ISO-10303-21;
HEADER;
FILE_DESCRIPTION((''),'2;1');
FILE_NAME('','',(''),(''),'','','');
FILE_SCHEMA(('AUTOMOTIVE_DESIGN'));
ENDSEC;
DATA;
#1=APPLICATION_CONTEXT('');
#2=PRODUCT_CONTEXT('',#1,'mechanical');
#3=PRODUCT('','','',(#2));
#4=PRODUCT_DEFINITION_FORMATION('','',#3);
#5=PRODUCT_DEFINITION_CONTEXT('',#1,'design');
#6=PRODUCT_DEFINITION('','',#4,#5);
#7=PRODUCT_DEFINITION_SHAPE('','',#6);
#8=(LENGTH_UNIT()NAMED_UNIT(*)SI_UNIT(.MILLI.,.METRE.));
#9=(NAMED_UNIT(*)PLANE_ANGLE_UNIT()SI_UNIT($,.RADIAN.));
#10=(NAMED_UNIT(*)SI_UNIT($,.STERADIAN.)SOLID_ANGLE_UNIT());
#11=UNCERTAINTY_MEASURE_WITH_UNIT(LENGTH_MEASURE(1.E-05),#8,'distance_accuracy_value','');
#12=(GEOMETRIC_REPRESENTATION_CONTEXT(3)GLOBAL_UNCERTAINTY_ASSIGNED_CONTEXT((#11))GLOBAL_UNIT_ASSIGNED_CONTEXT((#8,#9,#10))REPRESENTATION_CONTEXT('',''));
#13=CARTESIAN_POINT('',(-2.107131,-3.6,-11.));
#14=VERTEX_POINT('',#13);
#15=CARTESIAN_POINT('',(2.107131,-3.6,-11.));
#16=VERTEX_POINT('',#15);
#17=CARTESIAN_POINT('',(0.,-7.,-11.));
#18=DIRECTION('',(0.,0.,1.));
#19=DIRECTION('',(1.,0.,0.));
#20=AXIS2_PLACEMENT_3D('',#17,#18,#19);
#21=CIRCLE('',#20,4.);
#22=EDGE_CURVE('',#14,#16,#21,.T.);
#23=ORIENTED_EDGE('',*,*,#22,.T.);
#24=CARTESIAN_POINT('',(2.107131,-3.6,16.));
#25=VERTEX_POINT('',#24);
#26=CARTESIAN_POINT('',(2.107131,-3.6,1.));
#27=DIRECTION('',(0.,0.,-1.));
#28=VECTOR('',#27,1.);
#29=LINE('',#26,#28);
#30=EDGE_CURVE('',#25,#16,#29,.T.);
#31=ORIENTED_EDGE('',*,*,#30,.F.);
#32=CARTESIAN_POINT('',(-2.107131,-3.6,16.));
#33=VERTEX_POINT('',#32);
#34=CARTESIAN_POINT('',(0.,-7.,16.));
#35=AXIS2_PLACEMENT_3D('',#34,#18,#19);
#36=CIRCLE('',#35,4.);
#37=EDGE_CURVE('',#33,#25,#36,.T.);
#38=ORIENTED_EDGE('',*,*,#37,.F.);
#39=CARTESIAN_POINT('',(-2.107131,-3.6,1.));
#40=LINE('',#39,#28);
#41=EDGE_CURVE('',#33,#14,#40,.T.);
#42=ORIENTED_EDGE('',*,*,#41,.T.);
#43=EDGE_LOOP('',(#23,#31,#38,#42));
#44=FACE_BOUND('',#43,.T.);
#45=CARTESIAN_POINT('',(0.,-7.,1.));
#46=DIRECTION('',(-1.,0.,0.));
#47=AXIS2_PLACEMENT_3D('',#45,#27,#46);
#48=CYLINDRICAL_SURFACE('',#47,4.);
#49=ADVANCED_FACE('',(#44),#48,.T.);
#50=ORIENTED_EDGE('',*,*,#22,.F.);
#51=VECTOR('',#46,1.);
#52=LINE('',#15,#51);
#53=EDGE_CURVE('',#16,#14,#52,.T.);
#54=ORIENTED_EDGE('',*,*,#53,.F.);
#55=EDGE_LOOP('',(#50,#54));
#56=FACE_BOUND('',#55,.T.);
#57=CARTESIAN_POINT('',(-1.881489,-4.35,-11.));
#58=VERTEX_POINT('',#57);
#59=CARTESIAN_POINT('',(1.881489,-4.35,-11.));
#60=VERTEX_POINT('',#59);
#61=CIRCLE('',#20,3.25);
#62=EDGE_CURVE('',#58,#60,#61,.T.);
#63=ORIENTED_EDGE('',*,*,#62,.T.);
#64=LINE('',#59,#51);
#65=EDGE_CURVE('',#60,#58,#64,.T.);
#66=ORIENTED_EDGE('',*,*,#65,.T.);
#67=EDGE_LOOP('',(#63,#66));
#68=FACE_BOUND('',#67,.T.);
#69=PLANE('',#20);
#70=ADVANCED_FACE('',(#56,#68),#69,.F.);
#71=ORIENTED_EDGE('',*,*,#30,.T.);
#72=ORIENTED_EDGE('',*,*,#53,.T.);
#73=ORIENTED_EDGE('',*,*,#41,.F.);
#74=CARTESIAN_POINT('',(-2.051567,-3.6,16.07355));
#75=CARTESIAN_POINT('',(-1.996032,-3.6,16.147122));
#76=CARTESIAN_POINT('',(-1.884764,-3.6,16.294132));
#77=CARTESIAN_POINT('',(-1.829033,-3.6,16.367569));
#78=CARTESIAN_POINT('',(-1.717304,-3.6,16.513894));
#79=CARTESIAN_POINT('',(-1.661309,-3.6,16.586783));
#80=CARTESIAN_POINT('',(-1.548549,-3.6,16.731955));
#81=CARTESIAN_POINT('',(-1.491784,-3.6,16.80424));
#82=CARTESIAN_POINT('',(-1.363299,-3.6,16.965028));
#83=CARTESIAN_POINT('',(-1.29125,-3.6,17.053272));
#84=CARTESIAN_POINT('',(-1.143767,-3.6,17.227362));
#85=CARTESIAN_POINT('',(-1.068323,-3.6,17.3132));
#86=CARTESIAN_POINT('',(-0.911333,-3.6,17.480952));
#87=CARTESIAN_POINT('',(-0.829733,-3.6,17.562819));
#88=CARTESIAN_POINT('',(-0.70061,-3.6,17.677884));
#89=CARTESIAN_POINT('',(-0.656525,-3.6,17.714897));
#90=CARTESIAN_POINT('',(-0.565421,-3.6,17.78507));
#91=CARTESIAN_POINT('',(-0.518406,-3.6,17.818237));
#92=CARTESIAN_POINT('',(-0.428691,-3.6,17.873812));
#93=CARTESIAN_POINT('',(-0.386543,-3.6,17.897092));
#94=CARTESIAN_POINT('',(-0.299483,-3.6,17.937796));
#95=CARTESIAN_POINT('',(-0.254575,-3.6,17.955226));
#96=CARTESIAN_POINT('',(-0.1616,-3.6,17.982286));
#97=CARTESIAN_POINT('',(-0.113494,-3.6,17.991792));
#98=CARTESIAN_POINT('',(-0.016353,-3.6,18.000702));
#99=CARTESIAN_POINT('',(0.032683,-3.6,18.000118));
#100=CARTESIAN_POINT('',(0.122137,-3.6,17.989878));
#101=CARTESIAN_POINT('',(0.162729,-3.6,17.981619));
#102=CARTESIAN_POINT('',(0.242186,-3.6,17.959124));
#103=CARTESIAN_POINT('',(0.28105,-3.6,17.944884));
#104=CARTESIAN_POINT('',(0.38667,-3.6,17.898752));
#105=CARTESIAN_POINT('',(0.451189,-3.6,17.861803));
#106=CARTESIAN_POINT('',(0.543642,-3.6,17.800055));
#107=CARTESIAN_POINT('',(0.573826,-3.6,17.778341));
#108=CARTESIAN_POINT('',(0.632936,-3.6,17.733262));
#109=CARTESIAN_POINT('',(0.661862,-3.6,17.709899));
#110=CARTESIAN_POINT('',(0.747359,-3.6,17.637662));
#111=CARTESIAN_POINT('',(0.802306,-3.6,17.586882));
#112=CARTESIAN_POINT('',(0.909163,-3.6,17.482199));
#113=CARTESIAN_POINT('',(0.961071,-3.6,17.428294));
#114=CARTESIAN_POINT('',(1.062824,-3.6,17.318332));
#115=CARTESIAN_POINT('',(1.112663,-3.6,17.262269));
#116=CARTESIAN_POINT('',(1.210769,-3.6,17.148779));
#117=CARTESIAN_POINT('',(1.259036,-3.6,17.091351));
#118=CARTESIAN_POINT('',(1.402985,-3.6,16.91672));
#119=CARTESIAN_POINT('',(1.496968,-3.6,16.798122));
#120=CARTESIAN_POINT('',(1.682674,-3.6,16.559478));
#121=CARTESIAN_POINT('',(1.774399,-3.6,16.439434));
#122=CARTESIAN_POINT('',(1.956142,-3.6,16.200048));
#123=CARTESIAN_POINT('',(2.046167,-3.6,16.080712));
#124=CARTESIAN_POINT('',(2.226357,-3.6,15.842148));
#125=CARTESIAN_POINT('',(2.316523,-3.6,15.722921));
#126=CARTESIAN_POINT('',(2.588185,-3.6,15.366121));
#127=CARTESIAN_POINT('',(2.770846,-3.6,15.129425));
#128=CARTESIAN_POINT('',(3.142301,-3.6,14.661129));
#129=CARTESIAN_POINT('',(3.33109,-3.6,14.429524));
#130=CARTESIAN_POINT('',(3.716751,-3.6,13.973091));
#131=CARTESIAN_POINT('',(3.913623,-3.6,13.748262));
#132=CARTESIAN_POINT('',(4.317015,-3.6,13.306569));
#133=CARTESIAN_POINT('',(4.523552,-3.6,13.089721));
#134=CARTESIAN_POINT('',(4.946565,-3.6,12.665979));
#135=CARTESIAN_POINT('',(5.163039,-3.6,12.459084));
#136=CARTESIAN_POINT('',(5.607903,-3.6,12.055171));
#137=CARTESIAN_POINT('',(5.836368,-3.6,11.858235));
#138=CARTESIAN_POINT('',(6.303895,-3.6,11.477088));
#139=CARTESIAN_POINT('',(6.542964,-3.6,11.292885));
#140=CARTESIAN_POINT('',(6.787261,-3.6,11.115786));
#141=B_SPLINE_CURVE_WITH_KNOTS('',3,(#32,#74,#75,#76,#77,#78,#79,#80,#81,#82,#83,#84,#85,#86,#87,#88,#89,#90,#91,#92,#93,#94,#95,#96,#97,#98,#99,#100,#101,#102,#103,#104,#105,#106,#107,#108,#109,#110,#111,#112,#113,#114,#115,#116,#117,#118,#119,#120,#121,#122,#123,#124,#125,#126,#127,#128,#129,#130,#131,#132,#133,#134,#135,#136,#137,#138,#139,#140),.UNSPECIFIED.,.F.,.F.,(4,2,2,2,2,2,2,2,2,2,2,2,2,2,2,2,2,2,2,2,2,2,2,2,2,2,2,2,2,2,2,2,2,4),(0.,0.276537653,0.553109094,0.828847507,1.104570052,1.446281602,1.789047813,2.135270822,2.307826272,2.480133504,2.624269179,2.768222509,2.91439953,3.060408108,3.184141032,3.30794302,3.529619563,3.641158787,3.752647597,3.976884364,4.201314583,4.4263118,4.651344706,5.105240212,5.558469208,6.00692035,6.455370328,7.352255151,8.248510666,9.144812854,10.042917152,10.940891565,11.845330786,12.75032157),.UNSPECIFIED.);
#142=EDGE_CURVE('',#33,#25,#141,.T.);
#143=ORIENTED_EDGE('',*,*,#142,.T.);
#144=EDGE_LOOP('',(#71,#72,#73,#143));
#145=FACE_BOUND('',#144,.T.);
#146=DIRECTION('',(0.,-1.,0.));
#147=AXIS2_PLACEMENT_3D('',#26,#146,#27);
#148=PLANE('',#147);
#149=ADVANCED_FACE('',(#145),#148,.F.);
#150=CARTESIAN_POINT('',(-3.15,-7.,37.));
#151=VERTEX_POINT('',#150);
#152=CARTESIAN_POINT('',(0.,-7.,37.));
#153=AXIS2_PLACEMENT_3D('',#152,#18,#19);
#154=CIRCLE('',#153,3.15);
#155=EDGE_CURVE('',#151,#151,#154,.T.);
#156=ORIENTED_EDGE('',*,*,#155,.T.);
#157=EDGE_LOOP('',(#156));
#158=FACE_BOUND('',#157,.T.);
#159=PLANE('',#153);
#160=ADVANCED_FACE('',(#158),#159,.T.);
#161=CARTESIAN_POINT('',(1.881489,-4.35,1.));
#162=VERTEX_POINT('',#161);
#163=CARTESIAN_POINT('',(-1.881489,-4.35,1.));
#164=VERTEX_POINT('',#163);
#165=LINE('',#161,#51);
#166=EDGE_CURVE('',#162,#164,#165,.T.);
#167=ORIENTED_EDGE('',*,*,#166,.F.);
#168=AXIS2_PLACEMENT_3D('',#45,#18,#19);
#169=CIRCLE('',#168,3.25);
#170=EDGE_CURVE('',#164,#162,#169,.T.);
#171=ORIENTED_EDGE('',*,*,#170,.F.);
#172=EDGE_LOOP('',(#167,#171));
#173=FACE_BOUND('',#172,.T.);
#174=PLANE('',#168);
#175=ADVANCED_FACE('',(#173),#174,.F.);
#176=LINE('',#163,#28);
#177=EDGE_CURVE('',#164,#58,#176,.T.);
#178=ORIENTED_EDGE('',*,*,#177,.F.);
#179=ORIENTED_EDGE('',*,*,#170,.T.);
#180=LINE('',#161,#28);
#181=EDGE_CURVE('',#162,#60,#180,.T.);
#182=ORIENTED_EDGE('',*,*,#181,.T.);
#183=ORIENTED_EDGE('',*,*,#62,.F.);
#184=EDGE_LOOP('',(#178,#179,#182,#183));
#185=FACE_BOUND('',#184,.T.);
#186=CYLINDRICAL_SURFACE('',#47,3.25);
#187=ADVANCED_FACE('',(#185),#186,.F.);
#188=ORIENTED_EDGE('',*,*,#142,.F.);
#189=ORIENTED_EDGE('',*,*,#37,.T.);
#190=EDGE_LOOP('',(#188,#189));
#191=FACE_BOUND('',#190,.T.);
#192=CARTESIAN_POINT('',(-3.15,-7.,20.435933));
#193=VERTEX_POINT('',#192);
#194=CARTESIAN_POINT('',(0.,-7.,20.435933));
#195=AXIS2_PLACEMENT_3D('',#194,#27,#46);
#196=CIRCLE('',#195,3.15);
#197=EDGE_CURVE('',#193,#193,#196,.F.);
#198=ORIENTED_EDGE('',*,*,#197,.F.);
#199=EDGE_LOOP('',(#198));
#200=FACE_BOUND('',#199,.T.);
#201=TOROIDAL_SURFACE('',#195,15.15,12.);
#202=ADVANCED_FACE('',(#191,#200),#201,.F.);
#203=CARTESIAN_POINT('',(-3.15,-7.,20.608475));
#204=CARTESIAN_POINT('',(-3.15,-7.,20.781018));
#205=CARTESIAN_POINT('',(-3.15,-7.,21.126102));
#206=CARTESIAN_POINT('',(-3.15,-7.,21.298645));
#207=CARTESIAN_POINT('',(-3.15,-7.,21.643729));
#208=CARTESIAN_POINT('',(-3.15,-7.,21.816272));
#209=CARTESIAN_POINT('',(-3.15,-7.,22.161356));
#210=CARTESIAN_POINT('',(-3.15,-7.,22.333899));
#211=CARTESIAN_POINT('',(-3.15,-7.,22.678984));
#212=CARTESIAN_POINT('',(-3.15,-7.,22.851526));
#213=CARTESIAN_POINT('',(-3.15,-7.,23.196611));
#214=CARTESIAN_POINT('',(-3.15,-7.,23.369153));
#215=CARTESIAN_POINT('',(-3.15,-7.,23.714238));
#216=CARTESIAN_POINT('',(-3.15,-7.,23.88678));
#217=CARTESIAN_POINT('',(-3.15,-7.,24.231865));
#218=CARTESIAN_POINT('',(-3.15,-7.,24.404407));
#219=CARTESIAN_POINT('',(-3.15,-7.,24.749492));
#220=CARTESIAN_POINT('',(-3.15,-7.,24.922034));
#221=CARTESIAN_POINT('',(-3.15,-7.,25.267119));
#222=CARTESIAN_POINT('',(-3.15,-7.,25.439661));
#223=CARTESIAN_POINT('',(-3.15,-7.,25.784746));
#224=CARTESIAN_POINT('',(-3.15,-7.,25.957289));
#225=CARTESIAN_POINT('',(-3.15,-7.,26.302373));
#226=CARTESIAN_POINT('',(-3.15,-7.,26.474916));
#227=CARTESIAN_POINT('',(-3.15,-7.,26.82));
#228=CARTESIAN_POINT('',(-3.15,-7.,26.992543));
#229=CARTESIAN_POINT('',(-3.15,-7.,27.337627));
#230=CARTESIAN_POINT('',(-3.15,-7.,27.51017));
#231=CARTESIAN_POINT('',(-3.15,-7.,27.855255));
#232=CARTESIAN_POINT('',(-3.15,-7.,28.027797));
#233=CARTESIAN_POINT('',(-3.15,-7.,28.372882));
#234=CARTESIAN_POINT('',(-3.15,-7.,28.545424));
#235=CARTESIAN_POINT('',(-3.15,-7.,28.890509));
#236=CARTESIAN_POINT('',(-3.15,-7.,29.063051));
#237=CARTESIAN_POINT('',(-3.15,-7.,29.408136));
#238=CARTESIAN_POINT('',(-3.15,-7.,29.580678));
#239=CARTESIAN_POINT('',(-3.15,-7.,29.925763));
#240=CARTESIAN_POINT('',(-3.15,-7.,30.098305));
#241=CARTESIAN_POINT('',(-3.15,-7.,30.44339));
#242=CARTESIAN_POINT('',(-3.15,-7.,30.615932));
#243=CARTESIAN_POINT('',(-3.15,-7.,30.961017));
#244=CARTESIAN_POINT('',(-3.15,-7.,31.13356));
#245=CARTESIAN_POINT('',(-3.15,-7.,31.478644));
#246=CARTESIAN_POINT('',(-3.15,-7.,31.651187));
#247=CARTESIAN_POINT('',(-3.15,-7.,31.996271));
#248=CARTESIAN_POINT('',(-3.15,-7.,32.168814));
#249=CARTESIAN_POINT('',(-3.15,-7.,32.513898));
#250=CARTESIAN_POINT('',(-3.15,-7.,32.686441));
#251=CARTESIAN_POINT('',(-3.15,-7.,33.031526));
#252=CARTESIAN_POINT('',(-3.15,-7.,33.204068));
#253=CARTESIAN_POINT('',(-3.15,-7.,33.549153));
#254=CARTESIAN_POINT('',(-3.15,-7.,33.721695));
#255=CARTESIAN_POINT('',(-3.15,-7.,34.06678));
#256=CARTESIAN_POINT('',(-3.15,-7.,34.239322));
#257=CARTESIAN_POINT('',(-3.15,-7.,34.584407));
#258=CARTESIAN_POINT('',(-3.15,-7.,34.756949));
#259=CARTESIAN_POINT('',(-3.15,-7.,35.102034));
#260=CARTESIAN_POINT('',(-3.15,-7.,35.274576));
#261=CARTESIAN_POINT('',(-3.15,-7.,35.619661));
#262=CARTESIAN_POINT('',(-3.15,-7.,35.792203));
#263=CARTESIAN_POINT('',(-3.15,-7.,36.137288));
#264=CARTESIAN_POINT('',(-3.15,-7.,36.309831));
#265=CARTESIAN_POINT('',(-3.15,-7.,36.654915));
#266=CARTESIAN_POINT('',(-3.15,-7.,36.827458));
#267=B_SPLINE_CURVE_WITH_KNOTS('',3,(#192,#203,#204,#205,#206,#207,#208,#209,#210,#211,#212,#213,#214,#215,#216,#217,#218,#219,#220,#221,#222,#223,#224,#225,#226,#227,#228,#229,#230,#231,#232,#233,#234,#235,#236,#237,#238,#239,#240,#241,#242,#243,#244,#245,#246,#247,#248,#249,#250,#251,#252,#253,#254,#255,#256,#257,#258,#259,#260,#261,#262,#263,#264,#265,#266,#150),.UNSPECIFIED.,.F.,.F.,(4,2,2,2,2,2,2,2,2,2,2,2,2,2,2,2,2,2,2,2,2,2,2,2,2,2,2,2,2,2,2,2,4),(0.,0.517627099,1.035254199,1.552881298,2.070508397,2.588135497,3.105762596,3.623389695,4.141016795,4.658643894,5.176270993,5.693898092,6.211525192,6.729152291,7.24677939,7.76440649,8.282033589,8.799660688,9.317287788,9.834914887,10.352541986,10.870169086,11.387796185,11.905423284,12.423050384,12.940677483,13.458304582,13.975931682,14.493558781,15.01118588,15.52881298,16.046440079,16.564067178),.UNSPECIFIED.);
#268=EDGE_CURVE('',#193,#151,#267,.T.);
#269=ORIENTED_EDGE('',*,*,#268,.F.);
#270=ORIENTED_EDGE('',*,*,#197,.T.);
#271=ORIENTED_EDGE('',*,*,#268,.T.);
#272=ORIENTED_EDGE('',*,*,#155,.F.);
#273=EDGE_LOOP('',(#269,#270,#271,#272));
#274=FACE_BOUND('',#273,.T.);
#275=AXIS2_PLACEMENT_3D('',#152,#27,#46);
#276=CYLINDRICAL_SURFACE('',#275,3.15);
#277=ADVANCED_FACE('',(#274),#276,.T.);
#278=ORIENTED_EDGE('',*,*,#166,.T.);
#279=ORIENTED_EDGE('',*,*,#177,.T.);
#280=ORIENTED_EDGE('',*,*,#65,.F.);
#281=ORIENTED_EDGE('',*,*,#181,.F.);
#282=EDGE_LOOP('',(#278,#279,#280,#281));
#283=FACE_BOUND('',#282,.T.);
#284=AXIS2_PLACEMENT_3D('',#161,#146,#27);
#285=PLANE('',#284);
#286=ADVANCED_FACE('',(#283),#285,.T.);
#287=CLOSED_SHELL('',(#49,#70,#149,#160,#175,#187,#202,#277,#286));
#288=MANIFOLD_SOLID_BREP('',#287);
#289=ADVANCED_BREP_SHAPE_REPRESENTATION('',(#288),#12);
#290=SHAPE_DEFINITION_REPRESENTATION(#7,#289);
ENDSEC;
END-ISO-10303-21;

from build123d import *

# Parameters (mm, degrees)
BOSS_EXTRUDE1_DEPTH      = 1
BOSS_EXTRUDE1_DEPTH_BACK = 11
BOSS_EXTRUDE2_DEPTH      = 15
SKETCH3_R                = 3.15
BOSS_EXTRUDE3_DEPTH      = 21
FILLET1_R                = 12


with BuildPart() as part:
    # Sketch1 → Boss-Extrude1 (new, two sides: drawn at the far end of the back side and taken through both)
    with BuildSketch(Plane.XY.offset(-BOSS_EXTRUDE1_DEPTH_BACK)):
        with BuildLine():
            Line((2.107130751, -3.6), (-2.107130751, -3.6))
            ThreePointArc((-2.107130751, -3.6), (-3.494890771, -5.054302567), (-4, -7))
            ThreePointArc((-4, -7), (1.945697433, -10.494890771), (2.107130751, -3.6))
        make_face()
        with BuildLine():
            Line((1.881488772, -4.35), (-1.881488772, -4.35))
            ThreePointArc((-1.881488772, -4.35), (-2.887675407, -5.508748598), (-3.25, -7))
            ThreePointArc((-3.25, -7), (1.491251402, -9.887675407), (1.881488772, -4.35))
        make_face(mode=Mode.SUBTRACT)
    extrude(amount=BOSS_EXTRUDE1_DEPTH + BOSS_EXTRUDE1_DEPTH_BACK)

    # Sketch2 → Boss-Extrude2 (add)
    with BuildSketch(Plane.XY.offset(1)):
        with BuildLine():
            Line((2.107130751, -3.6), (-2.107130751, -3.6))
            ThreePointArc((-2.107130751, -3.6), (0, -11), (2.107130751, -3.6))
        make_face()
    extrude(amount=BOSS_EXTRUDE2_DEPTH)

    # Sketch3 → Boss-Extrude3 (add)
    with BuildSketch(Plane.XY.offset(16)):
        with Locations(Location((0, -7, 0), (0, 0, 180))):
            Circle(SKETCH3_R)
    extrude(amount=BOSS_EXTRUDE3_DEPTH)

    # Fillet1
    # the kernel refuses this fillet: 12 mm, written as the material it adds along each edge
    with BuildSketch(Plane(origin=(0, -7, 16), x_dir=(-1, 0, 0), z_dir=(0, 1, 0))) as fillet1_piece_1_section:
        with BuildLine():
            CenterArc((15.15, 4.435932822), FILLET1_R, 180, 21.694716022)
            Line((3.15, 4.435932822), (2.91, 4.435932822))
            Line((2.91, 4.435932822), (2.91, 0))
            Line((2.91, 0), (3.15, -0.24))
            ThreePointArc((3.15, -0.24), (3.575, -0.24), (3.777, -0.088718656))
            Line((3.777, -0.088718656), (4, 0))
        make_face()
    fillet1_piece_1 = revolve(axis=Axis((0, -7, 16), (0, 0, 1)), mode=Mode.PRIVATE)
    fillet1_piece_1 = split(fillet1_piece_1, bisect_by=Plane(origin=(3.32837519, -3.6, 18.170708912), z_dir=(0, -1, 0)), keep=Keep.TOP, mode=Mode.PRIVATE)
    add(fillet1_piece_1)


solid = part.part
